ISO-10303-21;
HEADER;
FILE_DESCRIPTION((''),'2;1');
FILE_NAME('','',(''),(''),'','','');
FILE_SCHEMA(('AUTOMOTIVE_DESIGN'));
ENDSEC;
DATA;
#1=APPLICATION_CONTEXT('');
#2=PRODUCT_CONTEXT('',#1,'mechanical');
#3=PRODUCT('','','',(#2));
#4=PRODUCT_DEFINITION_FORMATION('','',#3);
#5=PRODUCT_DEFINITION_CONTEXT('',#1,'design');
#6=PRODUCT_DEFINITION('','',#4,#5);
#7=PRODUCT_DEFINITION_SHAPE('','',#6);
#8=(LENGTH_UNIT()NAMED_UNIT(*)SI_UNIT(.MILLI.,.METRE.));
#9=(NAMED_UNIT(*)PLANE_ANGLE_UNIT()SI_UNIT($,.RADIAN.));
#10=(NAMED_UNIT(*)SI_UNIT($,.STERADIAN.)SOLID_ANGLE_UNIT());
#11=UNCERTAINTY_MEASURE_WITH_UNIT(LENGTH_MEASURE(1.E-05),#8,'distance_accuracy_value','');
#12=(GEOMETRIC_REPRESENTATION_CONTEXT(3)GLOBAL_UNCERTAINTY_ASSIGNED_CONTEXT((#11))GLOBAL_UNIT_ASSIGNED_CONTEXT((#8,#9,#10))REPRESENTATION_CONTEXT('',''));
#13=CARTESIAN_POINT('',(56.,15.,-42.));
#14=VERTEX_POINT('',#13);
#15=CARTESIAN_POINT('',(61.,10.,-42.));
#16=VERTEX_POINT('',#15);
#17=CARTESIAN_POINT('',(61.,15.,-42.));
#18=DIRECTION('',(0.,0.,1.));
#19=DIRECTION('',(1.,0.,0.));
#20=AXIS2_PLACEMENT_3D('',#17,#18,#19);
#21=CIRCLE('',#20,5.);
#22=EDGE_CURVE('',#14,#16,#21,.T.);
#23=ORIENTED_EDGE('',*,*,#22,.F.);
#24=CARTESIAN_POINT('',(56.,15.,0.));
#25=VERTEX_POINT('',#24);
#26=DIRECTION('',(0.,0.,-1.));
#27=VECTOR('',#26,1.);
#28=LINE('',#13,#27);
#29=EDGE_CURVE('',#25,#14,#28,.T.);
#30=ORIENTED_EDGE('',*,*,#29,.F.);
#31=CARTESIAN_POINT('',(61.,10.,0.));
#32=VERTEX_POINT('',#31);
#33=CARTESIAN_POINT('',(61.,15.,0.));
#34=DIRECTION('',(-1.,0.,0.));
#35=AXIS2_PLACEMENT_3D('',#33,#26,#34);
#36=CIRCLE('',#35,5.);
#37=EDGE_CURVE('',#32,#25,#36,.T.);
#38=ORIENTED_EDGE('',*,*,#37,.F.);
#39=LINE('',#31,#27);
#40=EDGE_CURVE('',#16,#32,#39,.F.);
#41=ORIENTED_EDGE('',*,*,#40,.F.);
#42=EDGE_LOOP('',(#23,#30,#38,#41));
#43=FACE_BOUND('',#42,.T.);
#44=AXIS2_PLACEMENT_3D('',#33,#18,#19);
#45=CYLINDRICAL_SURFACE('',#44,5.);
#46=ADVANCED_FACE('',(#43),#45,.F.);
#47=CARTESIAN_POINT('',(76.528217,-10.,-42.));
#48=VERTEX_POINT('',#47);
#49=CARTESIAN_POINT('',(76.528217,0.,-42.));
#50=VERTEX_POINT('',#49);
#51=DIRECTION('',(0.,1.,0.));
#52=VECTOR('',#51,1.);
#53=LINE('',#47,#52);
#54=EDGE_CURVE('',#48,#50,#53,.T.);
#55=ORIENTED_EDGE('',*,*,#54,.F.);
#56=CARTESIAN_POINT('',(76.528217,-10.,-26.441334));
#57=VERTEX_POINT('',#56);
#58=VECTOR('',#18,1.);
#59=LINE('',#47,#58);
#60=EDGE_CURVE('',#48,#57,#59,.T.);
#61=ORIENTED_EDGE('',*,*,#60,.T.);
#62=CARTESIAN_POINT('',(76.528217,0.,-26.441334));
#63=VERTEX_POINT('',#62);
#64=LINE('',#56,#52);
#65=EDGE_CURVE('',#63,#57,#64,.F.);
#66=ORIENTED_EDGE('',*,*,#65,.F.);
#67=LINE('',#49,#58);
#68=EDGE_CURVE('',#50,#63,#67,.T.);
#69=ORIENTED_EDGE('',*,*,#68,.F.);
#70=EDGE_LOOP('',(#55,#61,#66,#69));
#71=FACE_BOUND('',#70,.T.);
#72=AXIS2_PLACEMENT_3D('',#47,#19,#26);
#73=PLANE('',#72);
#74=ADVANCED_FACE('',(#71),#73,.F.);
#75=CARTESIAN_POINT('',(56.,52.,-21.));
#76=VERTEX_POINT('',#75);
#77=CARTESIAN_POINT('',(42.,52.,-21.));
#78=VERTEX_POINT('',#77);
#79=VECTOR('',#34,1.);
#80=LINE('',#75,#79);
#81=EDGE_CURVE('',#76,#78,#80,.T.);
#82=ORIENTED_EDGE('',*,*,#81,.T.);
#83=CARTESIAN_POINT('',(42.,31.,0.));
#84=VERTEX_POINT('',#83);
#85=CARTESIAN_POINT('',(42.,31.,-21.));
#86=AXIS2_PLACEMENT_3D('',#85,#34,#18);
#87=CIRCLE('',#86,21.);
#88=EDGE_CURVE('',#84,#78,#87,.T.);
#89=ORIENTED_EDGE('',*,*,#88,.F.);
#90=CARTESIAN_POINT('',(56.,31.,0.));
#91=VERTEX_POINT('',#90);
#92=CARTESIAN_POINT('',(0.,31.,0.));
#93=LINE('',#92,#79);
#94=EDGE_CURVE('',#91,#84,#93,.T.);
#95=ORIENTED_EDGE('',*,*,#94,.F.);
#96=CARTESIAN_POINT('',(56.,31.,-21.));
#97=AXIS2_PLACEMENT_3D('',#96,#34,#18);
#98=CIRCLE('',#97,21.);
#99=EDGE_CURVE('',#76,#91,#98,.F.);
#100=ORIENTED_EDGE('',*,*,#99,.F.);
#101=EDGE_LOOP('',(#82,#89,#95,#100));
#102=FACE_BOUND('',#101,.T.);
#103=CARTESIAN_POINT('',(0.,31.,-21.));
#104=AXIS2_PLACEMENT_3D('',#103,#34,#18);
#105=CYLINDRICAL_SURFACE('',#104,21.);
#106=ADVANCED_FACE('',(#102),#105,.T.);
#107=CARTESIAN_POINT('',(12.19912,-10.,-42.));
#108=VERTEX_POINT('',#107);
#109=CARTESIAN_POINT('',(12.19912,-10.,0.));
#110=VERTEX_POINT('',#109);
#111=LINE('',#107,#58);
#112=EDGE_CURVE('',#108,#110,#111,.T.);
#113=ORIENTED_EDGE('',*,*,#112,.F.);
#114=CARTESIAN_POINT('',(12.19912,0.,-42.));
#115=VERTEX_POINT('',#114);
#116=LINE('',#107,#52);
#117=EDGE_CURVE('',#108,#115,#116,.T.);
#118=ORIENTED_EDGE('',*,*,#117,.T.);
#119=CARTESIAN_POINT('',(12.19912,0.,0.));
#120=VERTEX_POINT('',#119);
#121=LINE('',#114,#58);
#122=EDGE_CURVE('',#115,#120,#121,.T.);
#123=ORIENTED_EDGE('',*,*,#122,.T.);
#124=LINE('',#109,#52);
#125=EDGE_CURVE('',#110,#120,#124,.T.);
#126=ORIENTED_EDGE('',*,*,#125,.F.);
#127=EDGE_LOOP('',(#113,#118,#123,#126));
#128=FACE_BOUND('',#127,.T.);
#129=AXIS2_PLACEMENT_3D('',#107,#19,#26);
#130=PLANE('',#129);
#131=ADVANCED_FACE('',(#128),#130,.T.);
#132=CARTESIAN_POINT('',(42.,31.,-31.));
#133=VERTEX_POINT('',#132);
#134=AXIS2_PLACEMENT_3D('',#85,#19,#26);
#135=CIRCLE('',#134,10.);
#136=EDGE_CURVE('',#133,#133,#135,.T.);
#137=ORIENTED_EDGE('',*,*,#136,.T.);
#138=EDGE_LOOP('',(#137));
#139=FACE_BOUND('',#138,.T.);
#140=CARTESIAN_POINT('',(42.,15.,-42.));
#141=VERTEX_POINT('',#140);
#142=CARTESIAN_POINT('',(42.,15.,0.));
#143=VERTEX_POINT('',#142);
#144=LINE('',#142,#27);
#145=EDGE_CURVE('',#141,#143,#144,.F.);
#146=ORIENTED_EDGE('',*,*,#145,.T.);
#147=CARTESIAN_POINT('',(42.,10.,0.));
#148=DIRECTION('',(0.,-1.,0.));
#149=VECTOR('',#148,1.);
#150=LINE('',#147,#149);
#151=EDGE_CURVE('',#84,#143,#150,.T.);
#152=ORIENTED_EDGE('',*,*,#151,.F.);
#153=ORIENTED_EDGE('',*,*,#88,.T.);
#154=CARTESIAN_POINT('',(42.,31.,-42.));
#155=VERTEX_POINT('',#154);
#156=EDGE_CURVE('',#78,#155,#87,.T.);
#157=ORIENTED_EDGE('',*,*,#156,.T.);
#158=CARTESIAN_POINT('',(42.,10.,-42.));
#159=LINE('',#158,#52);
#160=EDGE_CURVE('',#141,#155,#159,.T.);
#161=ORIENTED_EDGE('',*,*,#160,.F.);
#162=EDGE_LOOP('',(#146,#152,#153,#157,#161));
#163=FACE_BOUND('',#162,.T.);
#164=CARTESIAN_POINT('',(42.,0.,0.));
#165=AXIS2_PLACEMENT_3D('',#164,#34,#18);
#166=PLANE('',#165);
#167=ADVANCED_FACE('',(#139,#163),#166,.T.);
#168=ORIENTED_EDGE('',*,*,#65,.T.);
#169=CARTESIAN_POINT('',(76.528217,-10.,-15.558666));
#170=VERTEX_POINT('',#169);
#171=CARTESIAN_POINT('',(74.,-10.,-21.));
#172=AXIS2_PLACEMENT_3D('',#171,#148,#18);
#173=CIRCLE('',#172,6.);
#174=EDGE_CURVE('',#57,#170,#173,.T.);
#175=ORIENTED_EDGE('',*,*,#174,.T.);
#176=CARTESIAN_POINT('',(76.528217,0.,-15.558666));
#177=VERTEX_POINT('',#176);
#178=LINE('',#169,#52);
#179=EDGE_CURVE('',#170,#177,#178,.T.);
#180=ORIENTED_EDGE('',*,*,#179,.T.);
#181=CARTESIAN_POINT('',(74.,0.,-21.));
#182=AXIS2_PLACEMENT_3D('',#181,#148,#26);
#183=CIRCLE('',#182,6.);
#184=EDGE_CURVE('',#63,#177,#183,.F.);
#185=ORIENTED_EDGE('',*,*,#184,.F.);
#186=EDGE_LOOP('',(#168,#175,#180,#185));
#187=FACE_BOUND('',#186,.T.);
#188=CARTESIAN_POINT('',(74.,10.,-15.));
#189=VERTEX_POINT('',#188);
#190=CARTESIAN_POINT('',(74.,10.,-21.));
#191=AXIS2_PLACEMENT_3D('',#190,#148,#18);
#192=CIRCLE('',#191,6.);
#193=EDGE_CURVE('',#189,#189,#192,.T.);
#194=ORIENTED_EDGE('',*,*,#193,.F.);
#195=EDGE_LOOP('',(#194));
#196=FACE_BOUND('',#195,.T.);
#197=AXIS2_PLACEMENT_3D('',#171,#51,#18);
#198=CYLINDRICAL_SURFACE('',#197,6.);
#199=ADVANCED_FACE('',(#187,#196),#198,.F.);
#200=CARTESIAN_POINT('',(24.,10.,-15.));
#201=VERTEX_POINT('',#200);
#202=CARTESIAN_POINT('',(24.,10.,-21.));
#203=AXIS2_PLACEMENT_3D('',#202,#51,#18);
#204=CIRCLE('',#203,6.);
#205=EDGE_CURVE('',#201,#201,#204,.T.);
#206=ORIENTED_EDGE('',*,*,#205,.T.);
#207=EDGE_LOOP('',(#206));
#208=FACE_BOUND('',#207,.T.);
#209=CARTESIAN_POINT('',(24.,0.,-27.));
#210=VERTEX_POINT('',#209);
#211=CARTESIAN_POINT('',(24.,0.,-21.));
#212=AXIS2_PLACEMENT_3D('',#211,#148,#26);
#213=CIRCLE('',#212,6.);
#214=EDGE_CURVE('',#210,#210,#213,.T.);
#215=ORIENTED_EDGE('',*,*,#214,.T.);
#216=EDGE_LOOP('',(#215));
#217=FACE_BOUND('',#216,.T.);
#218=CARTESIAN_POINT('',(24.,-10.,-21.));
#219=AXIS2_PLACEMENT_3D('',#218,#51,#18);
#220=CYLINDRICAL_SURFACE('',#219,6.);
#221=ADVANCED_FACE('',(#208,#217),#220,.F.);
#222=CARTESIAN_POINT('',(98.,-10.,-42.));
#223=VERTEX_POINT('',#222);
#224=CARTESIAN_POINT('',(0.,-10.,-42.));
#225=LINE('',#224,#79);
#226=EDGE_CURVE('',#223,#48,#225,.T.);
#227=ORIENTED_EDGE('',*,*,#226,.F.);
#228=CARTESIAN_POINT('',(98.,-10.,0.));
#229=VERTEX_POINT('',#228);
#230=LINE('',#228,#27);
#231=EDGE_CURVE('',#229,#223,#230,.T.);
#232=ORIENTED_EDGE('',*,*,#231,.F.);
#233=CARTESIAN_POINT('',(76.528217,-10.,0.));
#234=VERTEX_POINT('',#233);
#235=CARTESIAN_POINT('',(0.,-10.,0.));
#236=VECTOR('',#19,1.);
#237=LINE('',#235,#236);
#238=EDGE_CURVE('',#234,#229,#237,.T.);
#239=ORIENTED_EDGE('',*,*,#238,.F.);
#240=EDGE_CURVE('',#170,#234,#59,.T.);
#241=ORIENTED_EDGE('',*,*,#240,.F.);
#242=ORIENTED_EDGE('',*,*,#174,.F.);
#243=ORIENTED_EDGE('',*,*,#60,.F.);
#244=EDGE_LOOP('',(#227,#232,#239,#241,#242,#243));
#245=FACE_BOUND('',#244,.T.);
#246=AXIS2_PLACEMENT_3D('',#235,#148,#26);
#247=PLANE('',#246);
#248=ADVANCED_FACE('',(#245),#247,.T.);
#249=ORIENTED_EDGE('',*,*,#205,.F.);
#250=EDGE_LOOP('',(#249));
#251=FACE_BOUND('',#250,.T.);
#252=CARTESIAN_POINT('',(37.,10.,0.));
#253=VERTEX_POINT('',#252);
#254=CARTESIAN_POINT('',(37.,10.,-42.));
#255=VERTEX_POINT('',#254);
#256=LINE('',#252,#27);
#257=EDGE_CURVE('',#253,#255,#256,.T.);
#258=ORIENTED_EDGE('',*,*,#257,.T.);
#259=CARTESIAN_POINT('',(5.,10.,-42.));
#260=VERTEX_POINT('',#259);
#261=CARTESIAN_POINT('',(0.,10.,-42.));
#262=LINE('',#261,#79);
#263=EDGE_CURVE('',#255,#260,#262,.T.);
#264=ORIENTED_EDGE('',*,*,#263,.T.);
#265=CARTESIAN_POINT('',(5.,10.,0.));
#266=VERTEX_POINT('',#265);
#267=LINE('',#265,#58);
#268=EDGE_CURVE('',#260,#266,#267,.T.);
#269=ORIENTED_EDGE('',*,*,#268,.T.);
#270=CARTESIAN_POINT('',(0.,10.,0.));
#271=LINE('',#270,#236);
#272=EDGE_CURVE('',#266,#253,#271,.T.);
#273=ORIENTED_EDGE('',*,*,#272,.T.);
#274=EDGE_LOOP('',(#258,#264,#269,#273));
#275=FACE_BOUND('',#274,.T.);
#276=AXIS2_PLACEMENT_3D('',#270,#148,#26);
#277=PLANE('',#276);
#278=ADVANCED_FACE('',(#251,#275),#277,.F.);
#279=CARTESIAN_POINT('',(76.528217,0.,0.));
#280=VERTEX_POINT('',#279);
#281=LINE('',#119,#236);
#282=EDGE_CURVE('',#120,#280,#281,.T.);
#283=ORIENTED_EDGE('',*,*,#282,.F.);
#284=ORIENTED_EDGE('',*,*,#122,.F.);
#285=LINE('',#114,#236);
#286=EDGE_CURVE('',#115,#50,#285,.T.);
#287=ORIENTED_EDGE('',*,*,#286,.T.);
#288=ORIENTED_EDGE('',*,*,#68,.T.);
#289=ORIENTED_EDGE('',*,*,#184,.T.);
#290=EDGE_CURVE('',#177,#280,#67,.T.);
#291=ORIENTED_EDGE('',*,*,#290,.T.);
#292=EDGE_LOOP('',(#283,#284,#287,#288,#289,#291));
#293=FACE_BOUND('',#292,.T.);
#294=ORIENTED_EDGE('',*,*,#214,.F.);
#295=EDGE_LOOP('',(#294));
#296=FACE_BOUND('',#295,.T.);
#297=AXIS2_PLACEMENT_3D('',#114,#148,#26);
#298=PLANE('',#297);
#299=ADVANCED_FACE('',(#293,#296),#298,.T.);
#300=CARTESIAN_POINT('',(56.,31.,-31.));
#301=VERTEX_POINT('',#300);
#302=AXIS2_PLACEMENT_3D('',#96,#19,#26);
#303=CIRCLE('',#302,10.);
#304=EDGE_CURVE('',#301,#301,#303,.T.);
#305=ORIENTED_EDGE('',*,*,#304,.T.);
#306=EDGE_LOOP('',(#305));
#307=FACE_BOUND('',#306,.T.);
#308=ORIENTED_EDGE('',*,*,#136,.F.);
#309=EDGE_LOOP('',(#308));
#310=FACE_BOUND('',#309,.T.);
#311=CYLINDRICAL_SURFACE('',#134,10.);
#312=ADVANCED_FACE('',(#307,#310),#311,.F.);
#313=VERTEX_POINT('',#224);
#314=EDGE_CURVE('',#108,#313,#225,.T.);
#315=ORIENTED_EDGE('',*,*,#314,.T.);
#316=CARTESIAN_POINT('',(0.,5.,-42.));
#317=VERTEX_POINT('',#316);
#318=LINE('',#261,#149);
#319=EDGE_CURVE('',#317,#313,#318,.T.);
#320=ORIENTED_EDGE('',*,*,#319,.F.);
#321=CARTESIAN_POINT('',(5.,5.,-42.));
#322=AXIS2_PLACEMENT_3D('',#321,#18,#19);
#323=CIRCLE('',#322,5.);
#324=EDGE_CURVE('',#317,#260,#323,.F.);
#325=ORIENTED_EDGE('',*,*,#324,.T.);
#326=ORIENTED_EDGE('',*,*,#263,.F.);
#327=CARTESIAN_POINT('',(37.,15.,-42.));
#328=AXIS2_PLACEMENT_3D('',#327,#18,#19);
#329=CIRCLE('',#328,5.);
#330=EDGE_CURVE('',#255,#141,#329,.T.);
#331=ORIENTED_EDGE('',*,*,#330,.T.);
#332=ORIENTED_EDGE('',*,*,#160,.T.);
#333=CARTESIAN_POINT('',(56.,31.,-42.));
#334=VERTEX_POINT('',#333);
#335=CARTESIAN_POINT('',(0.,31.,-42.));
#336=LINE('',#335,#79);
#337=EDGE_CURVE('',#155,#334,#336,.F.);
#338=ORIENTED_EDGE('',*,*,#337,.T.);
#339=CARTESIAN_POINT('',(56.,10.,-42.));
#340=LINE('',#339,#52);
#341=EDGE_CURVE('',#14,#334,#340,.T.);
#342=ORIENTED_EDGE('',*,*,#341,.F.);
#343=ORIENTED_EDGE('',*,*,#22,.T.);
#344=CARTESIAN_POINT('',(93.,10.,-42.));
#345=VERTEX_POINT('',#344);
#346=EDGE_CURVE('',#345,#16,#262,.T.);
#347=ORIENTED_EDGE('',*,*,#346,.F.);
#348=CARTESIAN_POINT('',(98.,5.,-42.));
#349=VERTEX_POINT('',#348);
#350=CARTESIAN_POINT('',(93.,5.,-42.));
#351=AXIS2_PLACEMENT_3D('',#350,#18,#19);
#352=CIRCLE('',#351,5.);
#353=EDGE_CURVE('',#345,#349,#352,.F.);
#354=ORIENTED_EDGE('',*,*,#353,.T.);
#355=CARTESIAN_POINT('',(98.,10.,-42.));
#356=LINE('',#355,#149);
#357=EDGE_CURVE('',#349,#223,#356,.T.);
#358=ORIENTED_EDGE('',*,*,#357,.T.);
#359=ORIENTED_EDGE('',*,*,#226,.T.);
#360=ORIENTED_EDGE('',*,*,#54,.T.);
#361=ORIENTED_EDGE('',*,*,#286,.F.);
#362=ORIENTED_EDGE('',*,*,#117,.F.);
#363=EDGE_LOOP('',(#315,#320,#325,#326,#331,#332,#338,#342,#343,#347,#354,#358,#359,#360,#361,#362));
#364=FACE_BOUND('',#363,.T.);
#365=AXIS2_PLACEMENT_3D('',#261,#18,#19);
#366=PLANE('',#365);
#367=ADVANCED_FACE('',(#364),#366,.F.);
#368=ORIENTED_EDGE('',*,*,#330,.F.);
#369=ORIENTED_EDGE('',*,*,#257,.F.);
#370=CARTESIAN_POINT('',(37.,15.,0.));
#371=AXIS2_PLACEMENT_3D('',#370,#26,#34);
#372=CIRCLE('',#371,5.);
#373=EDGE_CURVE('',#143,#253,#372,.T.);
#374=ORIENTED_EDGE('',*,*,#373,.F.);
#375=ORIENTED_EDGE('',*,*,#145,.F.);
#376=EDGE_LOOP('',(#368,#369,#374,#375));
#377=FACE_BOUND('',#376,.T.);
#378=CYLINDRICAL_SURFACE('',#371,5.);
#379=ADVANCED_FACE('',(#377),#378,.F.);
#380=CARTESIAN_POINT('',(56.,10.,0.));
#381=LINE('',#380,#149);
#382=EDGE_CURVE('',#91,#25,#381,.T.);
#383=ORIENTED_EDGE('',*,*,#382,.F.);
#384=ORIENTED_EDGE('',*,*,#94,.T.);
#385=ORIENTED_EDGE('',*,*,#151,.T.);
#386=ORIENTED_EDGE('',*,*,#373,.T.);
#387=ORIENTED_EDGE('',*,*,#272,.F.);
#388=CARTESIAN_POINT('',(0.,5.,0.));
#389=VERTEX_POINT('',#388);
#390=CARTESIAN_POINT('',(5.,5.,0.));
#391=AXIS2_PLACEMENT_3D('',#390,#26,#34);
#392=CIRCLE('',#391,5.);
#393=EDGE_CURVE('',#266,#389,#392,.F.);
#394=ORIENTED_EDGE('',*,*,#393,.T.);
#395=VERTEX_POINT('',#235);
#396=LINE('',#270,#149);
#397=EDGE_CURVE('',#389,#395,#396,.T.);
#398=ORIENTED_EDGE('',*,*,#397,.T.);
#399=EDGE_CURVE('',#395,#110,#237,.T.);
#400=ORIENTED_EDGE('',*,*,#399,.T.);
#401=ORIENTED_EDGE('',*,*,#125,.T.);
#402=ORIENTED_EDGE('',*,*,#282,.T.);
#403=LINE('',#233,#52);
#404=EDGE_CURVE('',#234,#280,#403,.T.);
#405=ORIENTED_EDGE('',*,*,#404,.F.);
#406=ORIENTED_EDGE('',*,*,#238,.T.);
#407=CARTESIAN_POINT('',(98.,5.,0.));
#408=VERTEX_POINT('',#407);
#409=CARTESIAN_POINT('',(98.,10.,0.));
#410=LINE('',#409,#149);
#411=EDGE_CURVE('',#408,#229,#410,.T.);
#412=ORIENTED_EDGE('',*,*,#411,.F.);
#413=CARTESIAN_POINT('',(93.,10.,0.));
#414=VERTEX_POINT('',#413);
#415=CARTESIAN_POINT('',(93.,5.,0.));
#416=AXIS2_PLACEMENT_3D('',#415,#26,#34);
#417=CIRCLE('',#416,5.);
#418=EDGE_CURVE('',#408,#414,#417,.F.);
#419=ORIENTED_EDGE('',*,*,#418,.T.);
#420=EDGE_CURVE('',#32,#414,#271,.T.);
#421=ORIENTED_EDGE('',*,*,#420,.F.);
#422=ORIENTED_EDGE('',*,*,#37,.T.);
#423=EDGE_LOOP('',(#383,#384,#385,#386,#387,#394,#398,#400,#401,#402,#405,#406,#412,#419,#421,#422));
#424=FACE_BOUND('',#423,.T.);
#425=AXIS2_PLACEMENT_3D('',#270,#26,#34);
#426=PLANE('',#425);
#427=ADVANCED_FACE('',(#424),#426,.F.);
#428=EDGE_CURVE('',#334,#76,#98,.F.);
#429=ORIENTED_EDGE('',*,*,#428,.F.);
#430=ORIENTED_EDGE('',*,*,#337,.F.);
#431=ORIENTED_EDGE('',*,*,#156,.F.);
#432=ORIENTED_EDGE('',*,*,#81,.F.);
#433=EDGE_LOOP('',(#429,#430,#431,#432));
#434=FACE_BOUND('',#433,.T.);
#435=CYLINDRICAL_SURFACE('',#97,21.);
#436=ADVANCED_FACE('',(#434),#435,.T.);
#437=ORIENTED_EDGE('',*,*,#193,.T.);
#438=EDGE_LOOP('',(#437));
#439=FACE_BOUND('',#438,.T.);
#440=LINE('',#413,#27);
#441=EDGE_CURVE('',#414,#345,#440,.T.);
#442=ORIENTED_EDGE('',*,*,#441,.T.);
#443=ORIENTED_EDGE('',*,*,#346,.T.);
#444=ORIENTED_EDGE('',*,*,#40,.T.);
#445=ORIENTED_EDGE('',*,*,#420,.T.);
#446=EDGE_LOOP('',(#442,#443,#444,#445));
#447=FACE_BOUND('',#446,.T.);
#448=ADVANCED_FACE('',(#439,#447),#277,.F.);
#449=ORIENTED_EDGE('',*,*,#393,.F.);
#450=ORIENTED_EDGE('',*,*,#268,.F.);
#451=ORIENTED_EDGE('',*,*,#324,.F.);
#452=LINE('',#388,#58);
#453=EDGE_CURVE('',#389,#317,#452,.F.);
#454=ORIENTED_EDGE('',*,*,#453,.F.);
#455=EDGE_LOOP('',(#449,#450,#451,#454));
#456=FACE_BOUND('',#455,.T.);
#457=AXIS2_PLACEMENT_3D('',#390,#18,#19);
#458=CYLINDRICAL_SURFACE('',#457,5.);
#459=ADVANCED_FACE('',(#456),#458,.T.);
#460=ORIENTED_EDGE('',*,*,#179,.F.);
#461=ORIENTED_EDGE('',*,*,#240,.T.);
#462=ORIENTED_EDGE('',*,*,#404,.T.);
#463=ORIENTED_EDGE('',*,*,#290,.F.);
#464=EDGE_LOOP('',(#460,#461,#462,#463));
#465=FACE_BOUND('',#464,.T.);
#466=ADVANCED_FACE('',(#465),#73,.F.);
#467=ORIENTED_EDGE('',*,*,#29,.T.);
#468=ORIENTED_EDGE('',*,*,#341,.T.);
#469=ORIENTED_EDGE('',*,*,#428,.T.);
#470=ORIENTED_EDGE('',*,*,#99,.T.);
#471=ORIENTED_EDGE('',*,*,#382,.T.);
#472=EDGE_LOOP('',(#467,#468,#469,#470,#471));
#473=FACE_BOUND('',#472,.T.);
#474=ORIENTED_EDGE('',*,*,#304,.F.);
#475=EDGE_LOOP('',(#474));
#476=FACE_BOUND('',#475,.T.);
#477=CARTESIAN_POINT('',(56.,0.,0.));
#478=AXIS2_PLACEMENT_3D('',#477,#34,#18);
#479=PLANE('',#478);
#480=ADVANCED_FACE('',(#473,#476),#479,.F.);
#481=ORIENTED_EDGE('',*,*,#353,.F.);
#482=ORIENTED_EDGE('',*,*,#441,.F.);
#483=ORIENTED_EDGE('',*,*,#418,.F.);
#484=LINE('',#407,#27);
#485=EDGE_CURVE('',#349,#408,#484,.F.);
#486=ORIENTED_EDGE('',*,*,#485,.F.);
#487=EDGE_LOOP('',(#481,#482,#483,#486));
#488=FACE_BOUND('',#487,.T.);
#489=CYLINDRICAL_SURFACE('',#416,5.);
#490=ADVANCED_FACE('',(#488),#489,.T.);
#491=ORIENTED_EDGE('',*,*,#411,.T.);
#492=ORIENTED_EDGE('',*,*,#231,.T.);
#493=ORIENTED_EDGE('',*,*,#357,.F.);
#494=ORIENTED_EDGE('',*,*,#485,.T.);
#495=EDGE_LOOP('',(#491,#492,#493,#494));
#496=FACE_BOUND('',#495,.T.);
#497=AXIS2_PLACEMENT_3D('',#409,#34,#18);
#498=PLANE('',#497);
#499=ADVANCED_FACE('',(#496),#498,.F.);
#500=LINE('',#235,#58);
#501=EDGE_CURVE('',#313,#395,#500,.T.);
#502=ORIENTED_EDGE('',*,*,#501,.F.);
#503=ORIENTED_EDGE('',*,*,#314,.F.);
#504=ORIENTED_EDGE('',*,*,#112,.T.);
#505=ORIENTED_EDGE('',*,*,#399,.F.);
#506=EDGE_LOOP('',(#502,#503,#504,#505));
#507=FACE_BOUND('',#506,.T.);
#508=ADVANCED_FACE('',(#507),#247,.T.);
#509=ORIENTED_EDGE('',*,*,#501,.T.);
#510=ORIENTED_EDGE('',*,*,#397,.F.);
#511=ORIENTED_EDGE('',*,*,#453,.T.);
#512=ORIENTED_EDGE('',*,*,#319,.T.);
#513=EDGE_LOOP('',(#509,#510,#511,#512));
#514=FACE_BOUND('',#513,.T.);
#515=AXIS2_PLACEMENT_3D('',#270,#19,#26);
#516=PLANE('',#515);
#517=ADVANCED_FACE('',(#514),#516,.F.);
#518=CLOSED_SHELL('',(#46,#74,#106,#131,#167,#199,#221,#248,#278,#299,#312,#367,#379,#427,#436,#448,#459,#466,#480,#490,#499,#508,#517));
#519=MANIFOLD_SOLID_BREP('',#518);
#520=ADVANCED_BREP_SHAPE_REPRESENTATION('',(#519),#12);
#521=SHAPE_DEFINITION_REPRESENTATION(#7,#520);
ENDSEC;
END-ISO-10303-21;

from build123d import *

# Parameters (mm, degrees)
SKETCH2_W           = 98
SKETCH2_H           = 42
BOSS_EXTRUDE1_DEPTH = 10
SKETCH3_W           = 64.32909673
SKETCH3_H           = 10
CUT_EXTRUDE3_DEPTH  = 108.088748242
SKETCH4_W           = 42
SKETCH4_H           = 42
BOSS_EXTRUDE2_DEPTH = 7
FILLET1_R           = 21
SKETCH5_R           = 10
CUT_EXTRUDE4_DEPTH  = 14
SKETCH7_R           = 6
CUT_EXTRUDE6_DEPTH  = 115.594938806
FILLET5_R           = 5
FILLET6_R           = 5
FILLET7_R           = 5


with BuildPart() as part:
    # Sketch2 → Boss-Extrude1 (new, symmetric)
    with BuildSketch(Plane(origin=(0, 0, 0), x_dir=(1, 0, 0), z_dir=(0, 1, 0))):
        with Locations((49, 21)):
            Rectangle(SKETCH2_W, SKETCH2_H)
    extrude(amount=BOSS_EXTRUDE1_DEPTH, both=True)

    # Sketch3 → Cut-Extrude3 (cut, through all)
    with BuildSketch(Plane.XY):
        with Locations((44.363668704, -5)):
            Rectangle(SKETCH3_W, SKETCH3_H)
    extrude(amount=-CUT_EXTRUDE3_DEPTH, mode=Mode.SUBTRACT)

    # Sketch4 → Boss-Extrude2 (add, symmetric)
    with BuildSketch(Plane(origin=(49, 0, 0), x_dir=(0, 0, -1), z_dir=(1, 0, 0))):
        with Locations((21, 31)):
            Rectangle(SKETCH4_W, SKETCH4_H)
    extrude(amount=BOSS_EXTRUDE2_DEPTH, both=True)

    # Fillet1
    fillet1_edges = [part.edges().sort_by_distance(p)[0] for p in [
        (49, 52, 0),
        (49, 52, -42),
    ]]
    fillet(fillet1_edges, radius=FILLET1_R - 0.0001)  # a hair under: the kernel refuses the full size

    # Sketch5 → Cut-Extrude4 (cut)
    with BuildSketch(Plane(origin=(56, 0, 0), x_dir=(0, 0, -1), z_dir=(1, 0, 0))):
        with Locations((21, 31)):
            Circle(SKETCH5_R)
    extrude(amount=-CUT_EXTRUDE4_DEPTH, mode=Mode.SUBTRACT)

    # Sketch7 → Cut-Extrude6 (cut, through all)
    with BuildSketch(Plane(origin=(0, 10, 0), x_dir=(1, 0, 0), z_dir=(0, 1, 0))):
        with Locations(Location((24, 21, 0), (0, 0, 270))):
            Circle(SKETCH7_R)
    cut_extrude6 = extrude(amount=-CUT_EXTRUDE6_DEPTH, mode=Mode.SUBTRACT)

    # Mirror3: Cut-Extrude6 across plane
    add(cut_extrude6.mirror(Plane(origin=(49, 0, 0), x_dir=(0, 0, 1), z_dir=(1, 0, 0))), mode=Mode.SUBTRACT)

    # Fillet5
    fillet5_edges = [part.edges().sort_by_distance(p)[0] for p in [
        (98, 10, -21),
    ]]
    fillet(fillet5_edges, radius=FILLET5_R)

    # Fillet6
    fillet6_edges = [part.edges().sort_by_distance(p)[0] for p in [
        (0, 10, -21),
    ]]
    fillet(fillet6_edges, radius=FILLET6_R)

    # Fillet7
    fillet7_edges = [part.edges().sort_by_distance(p)[0] for p in [
        (42, 10, -21),
        (56, 10, -21),
    ]]
    fillet(fillet7_edges, radius=FILLET7_R)


solid = part.part
